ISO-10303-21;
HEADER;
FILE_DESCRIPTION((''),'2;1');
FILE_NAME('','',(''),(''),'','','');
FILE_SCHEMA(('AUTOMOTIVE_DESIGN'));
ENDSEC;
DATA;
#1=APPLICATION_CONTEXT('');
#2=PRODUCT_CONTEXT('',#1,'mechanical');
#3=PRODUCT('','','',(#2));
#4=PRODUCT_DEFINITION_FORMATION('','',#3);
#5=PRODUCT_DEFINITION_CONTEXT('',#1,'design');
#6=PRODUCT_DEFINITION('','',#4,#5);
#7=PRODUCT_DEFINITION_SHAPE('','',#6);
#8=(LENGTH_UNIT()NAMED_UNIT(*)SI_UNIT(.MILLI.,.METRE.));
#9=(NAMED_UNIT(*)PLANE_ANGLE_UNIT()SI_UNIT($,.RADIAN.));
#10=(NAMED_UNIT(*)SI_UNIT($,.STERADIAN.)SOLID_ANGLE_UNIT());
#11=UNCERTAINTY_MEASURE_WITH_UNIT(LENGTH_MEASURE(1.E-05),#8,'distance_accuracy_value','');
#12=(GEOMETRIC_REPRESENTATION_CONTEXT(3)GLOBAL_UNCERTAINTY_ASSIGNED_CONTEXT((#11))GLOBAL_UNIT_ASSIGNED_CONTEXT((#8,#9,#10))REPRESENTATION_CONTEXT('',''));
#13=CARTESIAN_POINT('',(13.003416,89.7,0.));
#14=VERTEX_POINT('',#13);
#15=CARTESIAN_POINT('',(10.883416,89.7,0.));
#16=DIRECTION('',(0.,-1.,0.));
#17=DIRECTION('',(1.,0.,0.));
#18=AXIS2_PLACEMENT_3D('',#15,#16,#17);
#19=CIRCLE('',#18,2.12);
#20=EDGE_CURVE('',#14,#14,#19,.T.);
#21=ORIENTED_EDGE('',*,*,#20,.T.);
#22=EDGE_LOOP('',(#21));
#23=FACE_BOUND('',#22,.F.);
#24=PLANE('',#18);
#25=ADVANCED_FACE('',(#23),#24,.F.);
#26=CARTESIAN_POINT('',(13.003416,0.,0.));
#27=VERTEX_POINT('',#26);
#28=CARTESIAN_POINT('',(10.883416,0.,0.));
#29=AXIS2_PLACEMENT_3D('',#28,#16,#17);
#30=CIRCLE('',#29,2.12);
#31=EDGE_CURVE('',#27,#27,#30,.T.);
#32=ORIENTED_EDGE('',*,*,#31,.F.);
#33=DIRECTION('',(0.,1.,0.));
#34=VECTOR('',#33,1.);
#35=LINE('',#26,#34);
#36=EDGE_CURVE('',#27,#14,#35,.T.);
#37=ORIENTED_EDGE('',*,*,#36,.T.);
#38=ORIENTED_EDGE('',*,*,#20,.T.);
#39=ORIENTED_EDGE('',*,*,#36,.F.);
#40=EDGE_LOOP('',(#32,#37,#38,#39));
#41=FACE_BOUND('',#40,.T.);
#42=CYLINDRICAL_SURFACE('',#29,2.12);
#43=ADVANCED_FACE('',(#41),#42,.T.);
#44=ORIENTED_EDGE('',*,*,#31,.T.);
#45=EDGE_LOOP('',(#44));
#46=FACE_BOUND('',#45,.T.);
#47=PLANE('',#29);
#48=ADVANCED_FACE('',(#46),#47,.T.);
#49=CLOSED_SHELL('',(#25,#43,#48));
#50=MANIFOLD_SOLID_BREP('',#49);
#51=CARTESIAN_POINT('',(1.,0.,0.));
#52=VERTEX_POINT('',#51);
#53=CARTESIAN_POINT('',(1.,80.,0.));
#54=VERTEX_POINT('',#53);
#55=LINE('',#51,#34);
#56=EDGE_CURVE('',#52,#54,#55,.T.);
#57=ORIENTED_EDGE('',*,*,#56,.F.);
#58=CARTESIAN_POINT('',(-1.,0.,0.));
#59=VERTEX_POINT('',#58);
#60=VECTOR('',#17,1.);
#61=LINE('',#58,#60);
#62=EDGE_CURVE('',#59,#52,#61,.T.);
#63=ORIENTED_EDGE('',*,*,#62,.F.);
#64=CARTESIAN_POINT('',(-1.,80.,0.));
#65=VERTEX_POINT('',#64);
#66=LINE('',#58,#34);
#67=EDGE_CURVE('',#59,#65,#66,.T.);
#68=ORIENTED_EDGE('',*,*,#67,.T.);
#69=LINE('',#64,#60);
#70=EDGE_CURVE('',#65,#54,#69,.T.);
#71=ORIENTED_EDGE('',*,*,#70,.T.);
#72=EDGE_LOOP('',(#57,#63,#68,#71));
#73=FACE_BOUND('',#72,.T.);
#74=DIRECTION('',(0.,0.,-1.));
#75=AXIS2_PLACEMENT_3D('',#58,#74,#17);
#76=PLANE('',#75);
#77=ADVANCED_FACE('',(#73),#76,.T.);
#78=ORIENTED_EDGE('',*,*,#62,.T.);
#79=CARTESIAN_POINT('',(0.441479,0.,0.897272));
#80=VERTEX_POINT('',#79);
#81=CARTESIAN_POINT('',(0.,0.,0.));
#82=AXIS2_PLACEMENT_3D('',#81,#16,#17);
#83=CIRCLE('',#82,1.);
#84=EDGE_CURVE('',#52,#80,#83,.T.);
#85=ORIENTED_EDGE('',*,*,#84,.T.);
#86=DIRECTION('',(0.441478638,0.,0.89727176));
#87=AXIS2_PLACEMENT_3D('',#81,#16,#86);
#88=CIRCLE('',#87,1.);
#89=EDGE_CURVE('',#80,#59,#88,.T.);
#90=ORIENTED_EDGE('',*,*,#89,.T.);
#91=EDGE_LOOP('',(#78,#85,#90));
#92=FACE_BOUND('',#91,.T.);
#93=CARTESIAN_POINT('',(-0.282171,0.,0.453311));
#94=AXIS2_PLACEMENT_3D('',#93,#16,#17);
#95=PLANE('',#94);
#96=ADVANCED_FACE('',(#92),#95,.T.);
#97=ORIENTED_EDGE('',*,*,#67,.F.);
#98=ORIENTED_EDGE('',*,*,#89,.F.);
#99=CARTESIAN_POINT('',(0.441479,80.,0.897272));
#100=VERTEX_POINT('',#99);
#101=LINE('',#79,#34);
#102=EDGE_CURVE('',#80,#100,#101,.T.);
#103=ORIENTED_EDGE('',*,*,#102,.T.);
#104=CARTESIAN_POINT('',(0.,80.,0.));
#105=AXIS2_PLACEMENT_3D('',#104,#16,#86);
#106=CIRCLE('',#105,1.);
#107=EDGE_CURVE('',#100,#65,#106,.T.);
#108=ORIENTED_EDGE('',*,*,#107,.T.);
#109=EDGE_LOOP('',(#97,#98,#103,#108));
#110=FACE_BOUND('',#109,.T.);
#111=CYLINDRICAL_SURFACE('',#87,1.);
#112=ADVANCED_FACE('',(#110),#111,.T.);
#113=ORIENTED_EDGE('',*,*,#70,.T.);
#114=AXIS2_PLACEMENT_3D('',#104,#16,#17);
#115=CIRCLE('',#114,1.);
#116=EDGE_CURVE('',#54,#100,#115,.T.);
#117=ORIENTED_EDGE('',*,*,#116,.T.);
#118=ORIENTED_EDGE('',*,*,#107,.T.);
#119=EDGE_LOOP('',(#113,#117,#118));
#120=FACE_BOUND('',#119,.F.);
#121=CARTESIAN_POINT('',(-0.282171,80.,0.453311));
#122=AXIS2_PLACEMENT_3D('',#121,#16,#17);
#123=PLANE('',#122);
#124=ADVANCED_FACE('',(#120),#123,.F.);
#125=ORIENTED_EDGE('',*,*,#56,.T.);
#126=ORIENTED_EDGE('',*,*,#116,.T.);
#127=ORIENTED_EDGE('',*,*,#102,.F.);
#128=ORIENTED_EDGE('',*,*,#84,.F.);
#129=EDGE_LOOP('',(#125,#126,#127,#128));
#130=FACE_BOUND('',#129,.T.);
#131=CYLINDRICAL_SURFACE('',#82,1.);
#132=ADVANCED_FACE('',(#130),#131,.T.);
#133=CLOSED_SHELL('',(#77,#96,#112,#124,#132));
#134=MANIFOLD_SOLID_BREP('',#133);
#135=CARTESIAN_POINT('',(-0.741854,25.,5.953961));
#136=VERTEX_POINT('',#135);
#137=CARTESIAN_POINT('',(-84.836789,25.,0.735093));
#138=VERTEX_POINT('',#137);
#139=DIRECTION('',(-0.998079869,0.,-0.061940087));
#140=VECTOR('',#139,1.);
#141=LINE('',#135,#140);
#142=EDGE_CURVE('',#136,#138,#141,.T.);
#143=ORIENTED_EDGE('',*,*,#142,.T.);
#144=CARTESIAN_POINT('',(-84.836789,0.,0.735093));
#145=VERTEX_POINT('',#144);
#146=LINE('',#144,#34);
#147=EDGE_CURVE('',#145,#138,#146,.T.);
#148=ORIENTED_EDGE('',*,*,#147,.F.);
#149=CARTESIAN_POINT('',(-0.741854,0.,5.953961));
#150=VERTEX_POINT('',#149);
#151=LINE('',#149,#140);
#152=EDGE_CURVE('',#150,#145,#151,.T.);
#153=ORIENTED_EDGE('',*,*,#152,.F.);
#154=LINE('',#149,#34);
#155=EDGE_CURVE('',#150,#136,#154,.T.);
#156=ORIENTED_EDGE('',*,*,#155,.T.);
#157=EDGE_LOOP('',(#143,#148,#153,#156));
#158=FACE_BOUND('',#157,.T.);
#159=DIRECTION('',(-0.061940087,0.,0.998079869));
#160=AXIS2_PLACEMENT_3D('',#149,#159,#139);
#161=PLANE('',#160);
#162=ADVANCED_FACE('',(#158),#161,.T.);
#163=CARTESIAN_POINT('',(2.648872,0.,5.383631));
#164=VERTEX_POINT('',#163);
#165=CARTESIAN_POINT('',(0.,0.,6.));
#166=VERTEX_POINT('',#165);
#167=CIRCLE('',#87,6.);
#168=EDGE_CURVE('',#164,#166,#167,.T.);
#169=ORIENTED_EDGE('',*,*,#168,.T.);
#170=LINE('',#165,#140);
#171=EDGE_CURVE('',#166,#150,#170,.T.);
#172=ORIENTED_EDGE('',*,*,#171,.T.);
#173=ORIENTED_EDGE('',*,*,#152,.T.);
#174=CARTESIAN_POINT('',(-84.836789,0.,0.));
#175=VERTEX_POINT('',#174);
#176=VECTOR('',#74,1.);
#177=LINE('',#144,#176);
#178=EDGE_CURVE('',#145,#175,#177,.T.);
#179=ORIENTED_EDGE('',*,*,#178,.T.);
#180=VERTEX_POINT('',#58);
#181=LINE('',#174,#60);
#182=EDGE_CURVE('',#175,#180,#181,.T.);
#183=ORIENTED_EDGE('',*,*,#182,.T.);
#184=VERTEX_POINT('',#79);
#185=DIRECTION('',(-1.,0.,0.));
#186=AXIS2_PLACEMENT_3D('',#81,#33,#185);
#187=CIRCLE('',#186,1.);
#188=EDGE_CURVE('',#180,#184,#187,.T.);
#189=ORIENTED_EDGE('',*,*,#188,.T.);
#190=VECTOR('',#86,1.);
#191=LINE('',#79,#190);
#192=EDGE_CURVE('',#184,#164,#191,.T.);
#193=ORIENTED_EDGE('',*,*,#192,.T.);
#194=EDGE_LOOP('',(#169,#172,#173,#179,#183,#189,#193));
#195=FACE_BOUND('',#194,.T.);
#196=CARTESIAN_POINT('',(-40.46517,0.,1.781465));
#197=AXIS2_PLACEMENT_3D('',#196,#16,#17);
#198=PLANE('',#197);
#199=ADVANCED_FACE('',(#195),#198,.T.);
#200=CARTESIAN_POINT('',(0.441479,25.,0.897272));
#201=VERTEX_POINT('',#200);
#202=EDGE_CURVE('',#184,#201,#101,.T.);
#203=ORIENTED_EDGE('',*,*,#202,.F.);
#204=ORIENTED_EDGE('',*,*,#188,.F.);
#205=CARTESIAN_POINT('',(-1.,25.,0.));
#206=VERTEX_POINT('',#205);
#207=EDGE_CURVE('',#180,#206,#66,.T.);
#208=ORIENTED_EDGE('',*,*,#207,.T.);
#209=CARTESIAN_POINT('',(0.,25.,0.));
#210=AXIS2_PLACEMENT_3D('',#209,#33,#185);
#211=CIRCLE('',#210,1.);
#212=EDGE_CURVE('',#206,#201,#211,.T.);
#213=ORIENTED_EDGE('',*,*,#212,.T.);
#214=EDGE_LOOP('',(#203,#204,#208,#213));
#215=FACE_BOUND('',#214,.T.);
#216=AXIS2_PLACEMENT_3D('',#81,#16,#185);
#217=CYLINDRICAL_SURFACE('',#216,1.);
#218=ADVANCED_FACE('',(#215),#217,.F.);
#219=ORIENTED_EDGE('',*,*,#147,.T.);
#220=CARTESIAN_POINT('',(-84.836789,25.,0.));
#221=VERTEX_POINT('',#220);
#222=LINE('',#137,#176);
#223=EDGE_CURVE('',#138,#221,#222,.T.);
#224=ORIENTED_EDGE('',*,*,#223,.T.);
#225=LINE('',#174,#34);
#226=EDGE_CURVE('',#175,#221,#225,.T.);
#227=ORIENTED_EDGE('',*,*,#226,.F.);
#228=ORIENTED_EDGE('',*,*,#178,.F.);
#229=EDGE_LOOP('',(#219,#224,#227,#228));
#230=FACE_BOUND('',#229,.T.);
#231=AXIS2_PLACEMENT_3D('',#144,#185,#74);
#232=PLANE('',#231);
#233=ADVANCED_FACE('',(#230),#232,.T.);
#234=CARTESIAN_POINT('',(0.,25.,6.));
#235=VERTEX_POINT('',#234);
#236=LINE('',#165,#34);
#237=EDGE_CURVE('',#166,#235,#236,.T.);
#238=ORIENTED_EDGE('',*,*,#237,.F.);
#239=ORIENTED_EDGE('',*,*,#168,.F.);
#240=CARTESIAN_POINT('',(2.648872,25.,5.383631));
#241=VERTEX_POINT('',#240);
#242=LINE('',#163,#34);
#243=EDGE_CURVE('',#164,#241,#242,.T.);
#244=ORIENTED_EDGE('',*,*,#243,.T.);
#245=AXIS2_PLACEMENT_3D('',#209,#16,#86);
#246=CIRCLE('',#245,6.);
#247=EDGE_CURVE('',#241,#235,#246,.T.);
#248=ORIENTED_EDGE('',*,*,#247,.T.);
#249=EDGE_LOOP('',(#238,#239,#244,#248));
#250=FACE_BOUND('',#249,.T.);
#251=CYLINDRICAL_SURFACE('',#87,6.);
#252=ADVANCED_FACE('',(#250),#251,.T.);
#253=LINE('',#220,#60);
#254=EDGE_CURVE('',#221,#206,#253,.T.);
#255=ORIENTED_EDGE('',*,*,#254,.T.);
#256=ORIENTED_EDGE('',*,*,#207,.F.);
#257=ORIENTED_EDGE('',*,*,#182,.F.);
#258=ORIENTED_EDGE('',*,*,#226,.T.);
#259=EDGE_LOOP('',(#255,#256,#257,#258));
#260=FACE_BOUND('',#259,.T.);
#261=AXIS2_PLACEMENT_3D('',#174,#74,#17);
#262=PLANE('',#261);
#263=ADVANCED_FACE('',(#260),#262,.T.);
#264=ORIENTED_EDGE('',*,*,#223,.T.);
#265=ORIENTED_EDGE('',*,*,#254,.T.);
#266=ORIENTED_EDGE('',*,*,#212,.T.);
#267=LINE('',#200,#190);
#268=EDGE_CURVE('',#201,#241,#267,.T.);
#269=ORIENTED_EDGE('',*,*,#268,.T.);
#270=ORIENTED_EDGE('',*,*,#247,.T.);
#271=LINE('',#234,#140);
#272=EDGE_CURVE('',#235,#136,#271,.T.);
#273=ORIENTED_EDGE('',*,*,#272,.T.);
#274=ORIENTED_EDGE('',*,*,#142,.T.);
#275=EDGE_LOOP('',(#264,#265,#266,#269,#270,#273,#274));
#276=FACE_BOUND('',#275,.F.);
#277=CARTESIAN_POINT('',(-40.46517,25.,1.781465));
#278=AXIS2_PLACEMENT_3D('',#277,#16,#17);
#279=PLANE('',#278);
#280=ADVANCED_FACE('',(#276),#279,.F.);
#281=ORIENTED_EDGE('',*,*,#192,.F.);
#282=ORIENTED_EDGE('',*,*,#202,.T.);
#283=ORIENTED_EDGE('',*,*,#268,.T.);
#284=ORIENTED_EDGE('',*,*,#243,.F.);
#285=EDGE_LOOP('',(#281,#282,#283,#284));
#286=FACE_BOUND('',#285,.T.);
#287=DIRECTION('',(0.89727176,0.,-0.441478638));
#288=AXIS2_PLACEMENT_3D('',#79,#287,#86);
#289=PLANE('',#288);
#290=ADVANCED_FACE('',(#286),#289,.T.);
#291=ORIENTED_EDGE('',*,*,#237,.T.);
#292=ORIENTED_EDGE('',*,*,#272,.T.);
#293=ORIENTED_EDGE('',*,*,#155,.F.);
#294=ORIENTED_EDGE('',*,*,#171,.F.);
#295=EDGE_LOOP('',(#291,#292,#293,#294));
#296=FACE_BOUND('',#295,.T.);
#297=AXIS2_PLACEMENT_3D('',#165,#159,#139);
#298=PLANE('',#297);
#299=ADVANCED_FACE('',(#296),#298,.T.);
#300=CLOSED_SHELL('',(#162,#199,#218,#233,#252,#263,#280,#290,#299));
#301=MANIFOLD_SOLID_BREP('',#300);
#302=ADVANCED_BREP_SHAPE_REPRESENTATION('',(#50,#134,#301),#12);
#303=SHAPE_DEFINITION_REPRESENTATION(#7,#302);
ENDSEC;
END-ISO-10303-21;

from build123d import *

# Parameters (mm, degrees)
F1_DEPTH = 80
F2_R     = 2.12
F3_DEPTH = 89.7
F4_DEPTH = 25


with BuildPart() as f1:
    # F0 (on Front) → F1 (new body)
    with BuildSketch(Plane.XZ):
        with BuildLine():
            Line((0, 0), (0.4414786382, 0.8972717604))
            ThreePointArc((0.4414786382, 0.8972717604), (-0.5284512096, 0.8489636736), (-1, 0))
            Line((-1, 0), (0, 0))
        make_face()
        with BuildLine():
            ThreePointArc((1, 0), (0.8489636736, 0.5284512096), (0.4414786382, 0.8972717604))
            Line((0.4414786382, 0.8972717604), (0, 0))
            Line((0, 0), (1, 0))
        make_face()
    extrude(amount=-F1_DEPTH)


with BuildPart() as f3:
    # F2 (on Front) → F3 (new body)
    with BuildSketch(Plane.XZ):
        with Locations((10.8834160492, 0)):
            Circle(F2_R)
    extrude(amount=-F3_DEPTH)


with BuildPart() as f4:
    # F0 (on Front) → F4 (new body)
    with BuildSketch(Plane.XZ):
        with BuildLine():
            Line((0.4414786382, 0.8972717604), (2.6488718294, 5.3836305623))
            ThreePointArc((2.6488718294, 5.3836305623), (1.3598192208, 5.8438764264), (0, 6))
            Line((0, 6), (-0.7418538472, 5.9539611075))
            Line((-0.7418538472, 5.9539611075), (-84.8367888957, 0.7350926058))
            Line((-84.8367888957, 0.7350926058), (-84.8367888957, 0))
            Line((-84.8367888957, 0), (-1, 0))
            ThreePointArc((-1, 0), (-0.5284512096, 0.8489636736), (0.4414786382, 0.8972717604))
        make_face()
    extrude(amount=-F4_DEPTH)


solid = Compound([f1.part, f3.part, f4.part])
